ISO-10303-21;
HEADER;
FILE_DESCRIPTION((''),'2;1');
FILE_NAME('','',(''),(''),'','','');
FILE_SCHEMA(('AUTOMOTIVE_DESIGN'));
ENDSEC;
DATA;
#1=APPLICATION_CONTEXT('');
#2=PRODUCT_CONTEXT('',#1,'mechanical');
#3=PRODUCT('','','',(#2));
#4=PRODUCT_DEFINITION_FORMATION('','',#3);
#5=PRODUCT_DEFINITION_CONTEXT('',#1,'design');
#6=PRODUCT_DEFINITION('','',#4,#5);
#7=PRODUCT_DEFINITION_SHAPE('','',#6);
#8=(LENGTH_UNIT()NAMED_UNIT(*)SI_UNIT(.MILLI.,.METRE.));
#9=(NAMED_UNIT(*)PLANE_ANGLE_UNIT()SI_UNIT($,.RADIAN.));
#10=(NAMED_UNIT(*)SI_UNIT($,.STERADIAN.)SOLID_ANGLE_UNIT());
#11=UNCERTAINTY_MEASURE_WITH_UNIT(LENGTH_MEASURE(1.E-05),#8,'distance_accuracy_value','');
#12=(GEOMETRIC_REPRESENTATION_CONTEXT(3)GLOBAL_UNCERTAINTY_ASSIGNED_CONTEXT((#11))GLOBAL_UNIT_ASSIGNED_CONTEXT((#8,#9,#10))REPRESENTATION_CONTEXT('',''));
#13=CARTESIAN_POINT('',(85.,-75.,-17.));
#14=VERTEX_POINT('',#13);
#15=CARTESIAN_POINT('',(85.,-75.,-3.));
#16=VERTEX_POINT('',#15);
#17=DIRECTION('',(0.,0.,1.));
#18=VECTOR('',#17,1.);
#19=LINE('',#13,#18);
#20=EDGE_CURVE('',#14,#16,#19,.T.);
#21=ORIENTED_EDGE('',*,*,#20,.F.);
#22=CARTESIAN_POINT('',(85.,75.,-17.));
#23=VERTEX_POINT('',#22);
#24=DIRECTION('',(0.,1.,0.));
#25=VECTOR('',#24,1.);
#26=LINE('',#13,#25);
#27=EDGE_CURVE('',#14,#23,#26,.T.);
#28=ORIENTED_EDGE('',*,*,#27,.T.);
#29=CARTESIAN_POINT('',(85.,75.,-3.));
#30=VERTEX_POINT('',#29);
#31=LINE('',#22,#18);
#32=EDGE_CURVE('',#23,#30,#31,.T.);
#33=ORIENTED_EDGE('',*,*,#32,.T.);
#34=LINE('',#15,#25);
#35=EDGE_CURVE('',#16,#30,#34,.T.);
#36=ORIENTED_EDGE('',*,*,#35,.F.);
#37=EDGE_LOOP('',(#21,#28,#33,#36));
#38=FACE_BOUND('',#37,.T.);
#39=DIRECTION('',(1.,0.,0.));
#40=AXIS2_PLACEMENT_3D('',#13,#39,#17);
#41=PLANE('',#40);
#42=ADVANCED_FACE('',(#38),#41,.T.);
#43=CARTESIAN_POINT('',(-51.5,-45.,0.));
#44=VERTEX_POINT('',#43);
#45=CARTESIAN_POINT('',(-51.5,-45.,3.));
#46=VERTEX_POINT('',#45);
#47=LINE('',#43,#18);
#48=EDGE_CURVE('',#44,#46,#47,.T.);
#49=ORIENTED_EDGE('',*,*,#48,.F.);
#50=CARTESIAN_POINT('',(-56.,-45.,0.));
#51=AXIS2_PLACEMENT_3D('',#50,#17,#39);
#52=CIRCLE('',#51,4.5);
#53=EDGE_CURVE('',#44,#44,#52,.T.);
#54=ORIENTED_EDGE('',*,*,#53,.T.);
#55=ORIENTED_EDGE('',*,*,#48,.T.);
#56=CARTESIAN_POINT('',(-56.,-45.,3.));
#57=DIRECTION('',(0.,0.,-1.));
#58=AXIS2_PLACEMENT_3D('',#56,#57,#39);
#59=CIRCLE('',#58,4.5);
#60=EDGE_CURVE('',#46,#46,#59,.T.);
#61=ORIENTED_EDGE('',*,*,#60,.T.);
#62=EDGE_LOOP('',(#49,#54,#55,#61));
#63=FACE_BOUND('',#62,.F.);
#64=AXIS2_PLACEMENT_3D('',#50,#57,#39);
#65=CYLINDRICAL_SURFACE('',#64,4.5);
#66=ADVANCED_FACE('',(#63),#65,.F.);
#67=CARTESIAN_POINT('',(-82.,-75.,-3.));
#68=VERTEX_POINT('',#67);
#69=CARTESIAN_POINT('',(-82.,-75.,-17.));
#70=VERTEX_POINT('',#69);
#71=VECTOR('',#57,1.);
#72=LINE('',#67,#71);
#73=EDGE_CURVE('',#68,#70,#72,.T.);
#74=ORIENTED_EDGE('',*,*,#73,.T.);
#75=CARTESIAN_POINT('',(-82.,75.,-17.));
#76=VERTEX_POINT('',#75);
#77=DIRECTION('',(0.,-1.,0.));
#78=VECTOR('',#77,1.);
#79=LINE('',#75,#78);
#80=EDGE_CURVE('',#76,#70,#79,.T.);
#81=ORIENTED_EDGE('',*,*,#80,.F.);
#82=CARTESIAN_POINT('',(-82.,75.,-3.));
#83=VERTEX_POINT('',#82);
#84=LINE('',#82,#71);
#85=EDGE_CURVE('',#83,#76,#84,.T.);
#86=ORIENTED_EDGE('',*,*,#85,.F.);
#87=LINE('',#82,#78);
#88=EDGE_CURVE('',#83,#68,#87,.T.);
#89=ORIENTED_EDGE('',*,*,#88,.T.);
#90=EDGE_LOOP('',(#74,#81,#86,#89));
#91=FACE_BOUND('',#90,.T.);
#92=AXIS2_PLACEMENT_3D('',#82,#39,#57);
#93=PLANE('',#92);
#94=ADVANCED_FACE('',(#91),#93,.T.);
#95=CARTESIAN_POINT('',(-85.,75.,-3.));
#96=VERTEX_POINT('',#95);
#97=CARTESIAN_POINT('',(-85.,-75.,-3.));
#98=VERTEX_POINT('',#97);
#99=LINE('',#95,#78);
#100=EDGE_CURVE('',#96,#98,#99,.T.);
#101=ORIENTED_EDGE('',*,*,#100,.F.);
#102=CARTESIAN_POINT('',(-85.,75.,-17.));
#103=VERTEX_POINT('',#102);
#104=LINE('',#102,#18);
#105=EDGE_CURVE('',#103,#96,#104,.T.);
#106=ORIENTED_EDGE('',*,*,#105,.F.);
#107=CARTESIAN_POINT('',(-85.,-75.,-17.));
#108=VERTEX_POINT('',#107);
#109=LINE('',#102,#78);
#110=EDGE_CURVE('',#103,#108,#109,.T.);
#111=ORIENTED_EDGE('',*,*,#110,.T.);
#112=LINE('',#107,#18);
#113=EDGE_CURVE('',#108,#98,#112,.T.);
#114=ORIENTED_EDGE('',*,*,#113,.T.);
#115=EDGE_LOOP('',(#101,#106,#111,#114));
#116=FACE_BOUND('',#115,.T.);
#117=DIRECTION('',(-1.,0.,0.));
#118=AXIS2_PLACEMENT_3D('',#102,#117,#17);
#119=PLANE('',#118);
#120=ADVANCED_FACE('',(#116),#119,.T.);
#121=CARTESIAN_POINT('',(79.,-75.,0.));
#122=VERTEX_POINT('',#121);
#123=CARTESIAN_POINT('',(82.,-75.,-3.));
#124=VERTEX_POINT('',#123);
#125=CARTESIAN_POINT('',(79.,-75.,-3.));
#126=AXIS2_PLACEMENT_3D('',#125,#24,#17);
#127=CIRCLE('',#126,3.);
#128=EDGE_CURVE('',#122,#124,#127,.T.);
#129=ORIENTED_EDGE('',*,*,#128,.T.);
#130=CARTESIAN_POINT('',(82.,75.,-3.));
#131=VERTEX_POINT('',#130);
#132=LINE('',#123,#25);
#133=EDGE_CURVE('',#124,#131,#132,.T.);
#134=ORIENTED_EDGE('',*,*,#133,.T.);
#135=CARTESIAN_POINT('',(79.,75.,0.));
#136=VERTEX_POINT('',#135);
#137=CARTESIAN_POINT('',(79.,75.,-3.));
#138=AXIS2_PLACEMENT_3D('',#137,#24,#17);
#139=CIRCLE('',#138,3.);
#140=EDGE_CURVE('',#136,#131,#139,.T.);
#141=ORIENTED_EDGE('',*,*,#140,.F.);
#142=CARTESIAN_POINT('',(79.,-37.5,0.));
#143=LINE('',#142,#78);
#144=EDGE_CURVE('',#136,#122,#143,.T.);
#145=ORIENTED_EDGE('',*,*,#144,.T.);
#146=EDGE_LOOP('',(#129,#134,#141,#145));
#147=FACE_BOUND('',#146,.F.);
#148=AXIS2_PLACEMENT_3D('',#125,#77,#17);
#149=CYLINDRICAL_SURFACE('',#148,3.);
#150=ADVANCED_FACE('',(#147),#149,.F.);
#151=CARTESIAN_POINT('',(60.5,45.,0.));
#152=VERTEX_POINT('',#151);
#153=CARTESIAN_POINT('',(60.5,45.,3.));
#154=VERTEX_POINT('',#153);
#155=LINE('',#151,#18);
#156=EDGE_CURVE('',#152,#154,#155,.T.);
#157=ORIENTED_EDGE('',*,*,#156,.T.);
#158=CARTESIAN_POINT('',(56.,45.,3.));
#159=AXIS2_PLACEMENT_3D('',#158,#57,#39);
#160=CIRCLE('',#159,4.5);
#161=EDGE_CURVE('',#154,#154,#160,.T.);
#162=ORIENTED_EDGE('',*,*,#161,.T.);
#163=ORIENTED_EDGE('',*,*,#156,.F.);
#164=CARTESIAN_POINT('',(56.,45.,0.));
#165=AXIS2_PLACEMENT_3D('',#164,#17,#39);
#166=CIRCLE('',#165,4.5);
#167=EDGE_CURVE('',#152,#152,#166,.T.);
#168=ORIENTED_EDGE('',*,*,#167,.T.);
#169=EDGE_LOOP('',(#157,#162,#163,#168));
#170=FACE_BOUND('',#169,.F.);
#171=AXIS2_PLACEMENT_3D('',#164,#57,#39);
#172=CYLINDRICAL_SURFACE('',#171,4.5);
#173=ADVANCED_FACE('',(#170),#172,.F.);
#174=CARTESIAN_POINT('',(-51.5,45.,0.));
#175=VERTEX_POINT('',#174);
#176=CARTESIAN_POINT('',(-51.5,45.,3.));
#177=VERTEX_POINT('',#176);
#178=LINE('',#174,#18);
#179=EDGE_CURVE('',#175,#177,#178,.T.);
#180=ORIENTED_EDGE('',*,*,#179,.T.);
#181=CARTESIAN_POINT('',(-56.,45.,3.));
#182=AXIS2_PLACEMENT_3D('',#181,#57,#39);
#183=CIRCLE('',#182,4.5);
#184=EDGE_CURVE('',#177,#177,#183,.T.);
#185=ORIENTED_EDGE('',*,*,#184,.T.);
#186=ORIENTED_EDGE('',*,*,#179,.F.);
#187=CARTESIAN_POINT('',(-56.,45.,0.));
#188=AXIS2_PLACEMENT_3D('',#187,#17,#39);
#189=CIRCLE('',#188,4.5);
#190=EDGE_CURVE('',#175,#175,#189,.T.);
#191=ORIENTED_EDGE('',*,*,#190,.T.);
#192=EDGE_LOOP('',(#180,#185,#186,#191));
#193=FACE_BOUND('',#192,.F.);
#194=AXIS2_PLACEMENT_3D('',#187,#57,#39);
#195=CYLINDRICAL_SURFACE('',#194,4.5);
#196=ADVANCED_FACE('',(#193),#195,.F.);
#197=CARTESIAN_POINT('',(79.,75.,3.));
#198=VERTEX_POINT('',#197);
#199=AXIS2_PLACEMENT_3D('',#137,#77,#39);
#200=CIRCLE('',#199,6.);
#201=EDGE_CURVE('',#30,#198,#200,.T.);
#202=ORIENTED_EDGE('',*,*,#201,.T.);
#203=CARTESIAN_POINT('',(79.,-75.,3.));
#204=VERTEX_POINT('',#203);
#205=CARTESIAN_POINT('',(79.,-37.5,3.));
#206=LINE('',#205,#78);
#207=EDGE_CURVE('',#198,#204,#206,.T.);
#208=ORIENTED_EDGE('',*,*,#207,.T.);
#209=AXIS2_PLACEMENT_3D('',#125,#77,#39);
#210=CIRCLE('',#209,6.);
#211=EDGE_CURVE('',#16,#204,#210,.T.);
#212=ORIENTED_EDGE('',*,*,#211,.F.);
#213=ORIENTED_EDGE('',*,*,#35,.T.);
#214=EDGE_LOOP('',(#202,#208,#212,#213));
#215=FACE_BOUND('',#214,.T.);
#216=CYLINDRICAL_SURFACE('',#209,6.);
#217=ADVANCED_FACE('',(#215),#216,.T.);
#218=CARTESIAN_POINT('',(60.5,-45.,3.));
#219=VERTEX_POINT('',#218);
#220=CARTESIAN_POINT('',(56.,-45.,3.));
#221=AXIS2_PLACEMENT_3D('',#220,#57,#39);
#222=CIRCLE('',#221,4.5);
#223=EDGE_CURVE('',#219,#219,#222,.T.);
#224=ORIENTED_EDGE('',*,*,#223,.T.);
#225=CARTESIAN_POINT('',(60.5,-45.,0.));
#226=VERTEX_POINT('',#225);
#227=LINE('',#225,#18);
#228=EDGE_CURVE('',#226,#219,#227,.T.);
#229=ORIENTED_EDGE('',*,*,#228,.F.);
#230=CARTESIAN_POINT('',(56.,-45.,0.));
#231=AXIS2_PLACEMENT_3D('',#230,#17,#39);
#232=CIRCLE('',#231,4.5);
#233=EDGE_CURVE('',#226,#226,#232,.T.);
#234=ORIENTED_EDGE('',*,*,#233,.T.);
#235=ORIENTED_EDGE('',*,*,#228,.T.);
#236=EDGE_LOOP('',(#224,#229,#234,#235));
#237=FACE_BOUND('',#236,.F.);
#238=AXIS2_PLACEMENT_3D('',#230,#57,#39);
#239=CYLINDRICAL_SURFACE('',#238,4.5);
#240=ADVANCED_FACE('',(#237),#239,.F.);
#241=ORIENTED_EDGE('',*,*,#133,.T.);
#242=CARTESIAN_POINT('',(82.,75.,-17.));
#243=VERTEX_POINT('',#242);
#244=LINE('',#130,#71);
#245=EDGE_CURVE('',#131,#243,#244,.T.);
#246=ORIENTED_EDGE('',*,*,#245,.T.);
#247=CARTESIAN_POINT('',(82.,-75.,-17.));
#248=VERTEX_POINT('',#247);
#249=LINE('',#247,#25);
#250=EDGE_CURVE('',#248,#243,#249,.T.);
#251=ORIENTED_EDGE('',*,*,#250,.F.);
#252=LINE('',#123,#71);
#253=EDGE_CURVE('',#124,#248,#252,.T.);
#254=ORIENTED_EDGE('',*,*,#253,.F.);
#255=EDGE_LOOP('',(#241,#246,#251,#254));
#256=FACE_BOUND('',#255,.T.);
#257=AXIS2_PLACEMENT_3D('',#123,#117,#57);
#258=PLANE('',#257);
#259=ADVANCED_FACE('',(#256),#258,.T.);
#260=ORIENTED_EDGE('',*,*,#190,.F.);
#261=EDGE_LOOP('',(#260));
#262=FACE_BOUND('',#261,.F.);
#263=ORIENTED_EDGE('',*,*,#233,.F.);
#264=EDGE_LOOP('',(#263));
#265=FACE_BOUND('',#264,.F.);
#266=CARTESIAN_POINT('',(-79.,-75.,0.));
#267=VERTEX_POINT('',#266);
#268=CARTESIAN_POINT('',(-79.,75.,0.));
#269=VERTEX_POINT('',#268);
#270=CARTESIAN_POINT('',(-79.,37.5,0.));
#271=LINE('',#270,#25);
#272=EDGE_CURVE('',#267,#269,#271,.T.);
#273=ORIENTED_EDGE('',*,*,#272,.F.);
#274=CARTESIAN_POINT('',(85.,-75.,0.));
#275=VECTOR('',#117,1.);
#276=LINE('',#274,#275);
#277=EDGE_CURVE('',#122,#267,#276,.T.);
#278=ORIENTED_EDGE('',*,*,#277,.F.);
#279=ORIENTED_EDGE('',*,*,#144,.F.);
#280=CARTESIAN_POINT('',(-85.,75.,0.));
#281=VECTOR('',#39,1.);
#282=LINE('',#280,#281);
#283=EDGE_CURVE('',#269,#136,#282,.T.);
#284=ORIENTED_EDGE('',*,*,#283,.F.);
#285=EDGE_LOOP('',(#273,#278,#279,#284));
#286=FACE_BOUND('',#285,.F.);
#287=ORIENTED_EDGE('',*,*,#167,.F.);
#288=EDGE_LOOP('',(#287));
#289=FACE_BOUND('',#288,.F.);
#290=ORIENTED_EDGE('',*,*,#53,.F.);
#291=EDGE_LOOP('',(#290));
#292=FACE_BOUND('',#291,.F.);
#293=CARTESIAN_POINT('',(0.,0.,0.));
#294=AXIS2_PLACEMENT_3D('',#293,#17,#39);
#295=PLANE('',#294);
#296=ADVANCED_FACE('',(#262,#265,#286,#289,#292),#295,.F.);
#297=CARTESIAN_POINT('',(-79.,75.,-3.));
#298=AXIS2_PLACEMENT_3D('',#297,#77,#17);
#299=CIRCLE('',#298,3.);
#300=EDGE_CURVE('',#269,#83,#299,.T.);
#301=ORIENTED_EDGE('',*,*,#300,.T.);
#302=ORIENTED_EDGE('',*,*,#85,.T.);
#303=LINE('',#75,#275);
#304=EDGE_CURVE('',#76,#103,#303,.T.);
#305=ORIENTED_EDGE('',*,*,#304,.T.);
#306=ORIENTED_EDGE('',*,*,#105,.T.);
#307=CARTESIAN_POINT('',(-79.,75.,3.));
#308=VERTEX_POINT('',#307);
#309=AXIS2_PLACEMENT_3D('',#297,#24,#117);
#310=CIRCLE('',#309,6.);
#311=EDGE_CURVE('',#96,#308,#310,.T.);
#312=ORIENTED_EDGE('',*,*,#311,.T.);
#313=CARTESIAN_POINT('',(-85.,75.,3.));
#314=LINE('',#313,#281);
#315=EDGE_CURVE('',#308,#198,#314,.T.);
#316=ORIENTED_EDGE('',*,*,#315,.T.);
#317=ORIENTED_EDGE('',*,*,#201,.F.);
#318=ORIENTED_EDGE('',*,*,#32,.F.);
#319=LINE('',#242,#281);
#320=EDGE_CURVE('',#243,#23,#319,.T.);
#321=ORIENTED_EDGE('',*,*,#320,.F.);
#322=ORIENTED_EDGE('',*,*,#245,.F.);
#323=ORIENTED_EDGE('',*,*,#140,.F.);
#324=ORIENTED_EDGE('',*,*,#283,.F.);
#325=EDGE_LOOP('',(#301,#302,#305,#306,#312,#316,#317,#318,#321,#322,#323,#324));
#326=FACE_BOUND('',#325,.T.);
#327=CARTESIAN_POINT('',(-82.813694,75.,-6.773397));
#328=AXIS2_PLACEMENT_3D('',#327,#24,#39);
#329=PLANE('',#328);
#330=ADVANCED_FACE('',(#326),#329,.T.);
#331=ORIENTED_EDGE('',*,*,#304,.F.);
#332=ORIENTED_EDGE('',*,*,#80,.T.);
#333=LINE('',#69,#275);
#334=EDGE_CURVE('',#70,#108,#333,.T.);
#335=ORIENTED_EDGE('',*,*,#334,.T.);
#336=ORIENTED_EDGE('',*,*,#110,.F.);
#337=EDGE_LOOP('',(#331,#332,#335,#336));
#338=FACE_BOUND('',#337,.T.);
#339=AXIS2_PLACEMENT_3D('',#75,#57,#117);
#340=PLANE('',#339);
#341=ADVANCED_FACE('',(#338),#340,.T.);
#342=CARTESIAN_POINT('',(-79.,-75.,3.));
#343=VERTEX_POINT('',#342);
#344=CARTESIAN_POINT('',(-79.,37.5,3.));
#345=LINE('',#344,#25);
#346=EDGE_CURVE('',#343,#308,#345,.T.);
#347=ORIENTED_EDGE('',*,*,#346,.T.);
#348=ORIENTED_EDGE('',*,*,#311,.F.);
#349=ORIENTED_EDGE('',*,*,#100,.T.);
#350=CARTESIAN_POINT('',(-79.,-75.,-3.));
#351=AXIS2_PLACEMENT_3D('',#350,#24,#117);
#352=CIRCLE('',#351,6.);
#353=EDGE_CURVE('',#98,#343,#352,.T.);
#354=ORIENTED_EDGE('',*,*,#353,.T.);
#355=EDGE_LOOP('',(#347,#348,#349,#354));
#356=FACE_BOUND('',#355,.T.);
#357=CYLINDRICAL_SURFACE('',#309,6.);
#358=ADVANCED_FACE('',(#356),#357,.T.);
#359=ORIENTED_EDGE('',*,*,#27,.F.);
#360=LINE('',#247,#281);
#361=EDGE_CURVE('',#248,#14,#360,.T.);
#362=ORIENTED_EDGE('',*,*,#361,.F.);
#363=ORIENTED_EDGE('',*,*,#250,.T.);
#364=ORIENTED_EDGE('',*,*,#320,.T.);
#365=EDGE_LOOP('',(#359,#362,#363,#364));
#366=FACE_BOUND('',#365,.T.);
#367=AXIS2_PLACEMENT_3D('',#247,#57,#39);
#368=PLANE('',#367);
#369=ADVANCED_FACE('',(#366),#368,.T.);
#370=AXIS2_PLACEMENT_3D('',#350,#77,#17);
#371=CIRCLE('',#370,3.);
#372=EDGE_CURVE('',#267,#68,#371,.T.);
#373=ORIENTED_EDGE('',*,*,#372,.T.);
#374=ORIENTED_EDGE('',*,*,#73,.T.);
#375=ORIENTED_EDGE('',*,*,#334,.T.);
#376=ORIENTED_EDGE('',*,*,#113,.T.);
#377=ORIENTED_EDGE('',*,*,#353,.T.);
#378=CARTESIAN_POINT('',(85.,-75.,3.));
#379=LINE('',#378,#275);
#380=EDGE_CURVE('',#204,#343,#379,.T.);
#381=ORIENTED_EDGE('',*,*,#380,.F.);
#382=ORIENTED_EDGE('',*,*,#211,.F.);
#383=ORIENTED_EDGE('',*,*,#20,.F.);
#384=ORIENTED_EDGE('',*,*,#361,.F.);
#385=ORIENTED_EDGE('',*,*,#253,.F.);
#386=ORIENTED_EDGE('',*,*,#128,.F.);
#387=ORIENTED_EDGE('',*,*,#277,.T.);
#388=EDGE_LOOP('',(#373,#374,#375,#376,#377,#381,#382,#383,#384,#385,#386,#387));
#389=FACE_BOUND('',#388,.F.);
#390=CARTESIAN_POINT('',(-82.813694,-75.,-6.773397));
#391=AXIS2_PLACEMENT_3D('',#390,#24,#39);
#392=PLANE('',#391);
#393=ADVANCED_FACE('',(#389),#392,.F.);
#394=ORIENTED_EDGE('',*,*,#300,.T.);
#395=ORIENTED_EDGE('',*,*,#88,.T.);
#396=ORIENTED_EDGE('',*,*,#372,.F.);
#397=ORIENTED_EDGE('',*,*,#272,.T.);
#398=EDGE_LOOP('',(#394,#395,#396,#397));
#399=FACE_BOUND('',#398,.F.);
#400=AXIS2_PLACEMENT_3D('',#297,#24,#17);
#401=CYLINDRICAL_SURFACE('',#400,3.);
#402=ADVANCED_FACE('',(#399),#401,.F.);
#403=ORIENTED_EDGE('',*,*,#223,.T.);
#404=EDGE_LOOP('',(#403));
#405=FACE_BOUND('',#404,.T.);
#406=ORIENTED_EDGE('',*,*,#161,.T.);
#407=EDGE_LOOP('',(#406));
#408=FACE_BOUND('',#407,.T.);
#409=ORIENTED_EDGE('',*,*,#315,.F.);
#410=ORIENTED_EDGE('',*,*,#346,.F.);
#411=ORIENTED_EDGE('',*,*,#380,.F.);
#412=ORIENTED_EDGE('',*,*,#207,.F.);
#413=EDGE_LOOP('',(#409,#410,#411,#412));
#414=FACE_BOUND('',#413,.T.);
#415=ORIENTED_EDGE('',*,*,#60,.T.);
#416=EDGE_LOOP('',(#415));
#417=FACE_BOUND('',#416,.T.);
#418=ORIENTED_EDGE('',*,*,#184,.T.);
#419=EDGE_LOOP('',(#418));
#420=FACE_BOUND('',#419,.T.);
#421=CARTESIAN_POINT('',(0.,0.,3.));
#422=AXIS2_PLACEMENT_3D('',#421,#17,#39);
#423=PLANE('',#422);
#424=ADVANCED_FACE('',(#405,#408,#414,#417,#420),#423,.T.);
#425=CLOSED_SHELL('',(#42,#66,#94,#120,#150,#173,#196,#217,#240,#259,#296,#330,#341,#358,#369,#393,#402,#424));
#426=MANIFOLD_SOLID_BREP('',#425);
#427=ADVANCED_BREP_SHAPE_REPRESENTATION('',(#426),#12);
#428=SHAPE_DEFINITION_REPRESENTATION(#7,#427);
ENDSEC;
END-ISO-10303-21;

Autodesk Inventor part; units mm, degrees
ref_plane "YZ Plane" through (0, 0, 0) normal (1, 0, 0) x (0, 1, 0)
ref_plane "XZ Plane" through (0, 0, 0) normal (0, 1, 0) x (-1, 0, 0)
ref_plane "XY Plane" through (0, 0, 0) normal (0, 0, 1) x (1, 0, 0)
sketch "Sketch1" plane through (0, 0, 0) normal (0, 0, 1) x (1, 0, 0)
  line L0 (85, -75) -> (-85, -75)
  line L1 (-85, -75) -> (-85, 75)
  line L2 (-85, 75) -> (85, 75)
  line L3 (85, 75) -> (85, -75)
  line L4 (85, 75) -> (-85, -75) construction
  point P0 (0, 0)
  point P1 (0, 0)
  dimension "d1" = 150
  dimension "d2" = 170
extrude "Plate1" add sketch "Sketch1" along normal blind 3
sketch "Sketch2" plane through (0, 0, 0) normal (0, 0, 1) x (1, 0, 0)
  line L0 (56, -45) -> (-56, -45) construction
  line L1 (-56, -45) -> (-56, 45) construction
  line L2 (-56, 45) -> (56, 45) construction
  line L3 (56, 45) -> (56, -45) construction
  line L4 (56, -45) -> (-56, 45) construction
  line L5 (-56, -45) -> (56, 45) construction
  circle A0 centre (-56, -45) radius 4.5
  circle A1 centre (56, -45) radius 4.5
  circle A2 centre (56, 45) radius 4.5
  circle A3 centre (-56, 45) radius 4.5
  line L6 (56, 0) -> (-56, 0) construction
  point P0 (0, 0)
  point P1 (0, 0)
  dimension "d4" = 112
  dimension "d5" = 90
  dimension "d7" = 9
extrude "Extrusion1" cut sketch "Sketch2" along normal through all
sketch "Sketch3" plane through (-82, 75, 3) normal (-1, 0, 0) x (0, -1, 0)
  line L0 (150, 0) -> (0, 0)
  line L1 (0, 0) -> (0, -20)
  line L2 (0, -20) -> (150, -20)
  line L3 (150, -20) -> (150, 0)
edge flange "Flange1" height 20 angle 90 thickness 3 bend radius 3 thickness toward (-1, 0, 0) relief tear relief width 3 relief depth 1.5 corner gap 3 corner form 0 edges at (-85, 0, 0) (85, 0, 0) wall of the first edge with corners at (-82, -75, 3) (-82, 75, 3) (-82, 75, -17) (-82, -75, -17)
bend "Bend1"
corner "Corner1"
sketch "Sketch4" plane through (0, 0, 0) normal (0, 0, 1) x (1, 0, 0)
  circle A0 centre (0, 75) radius 17.5 projected
  line L0 (0, 125) -> (0, 105) construction
  line L1 (-3, 125) -> (-3, 105)
  line L2 (3, 105) -> (3, 125)
  arc A1 (3, 125) -> (-3, 125) centre (0, 125) ccw
  arc A2 (-3, 105) -> (3, 105) centre (0, 105) ccw
  arc A3 (34.641, 95) -> (20, 109.641) centre (0, 75) ccw construction
  arc A4 (37.2391, 96.5) -> (21.5, 112.2391) centre (0, 75) ccw
  arc A5 (32.0429, 93.5) -> (18.5, 107.0429) centre (0, 75) ccw
  arc A6 (32.0429, 93.5) -> (37.2391, 96.5) centre (34.641, 95) ccw
  arc A7 (21.5, 112.2391) -> (18.5, 107.0429) centre (20, 109.641) ccw
  line L3 (0, 75) -> (20, 109.641) construction
  line L4 (0, 75) -> (40, 75) construction
  line L5 (0, 75) -> (34.641, 95) construction
  point P0 (0, 0)
  point P1 (0, 115)
  dimension "d20" = 20
  dimension "d21" = 6
  dimension "d22" = 30
  dimension "d23" = 60
  dimension "d24" = 30
  dimension "d25" = 6
  dimension "d26" = 40
extrude "Extrusion2" [suppressed]
pattern_circular "Circular Pattern1" [suppressed]
equation "\"d0\" = Thickness"
equation "\"d10\" = BendReliefWidth"
equation "\"d11\" = BendReliefDepth"
equation "\"d12\" = MinimumRemnant"
equation "\"d13\" = TransitionRadius"
equation "\"d16\" = BendRadius"
equation "\"d17\" = CornerReliefSize"
equation "\"d18\" = GapSize"
equation "\"d19\" = JacobiRadiusSize"
equation "\"BendRadius\" = Thickness"
equation "\"BendReliefWidth\" = Thickness"
equation "\"BendReliefDepth\" = 0.5 * Thickness"
equation "\"CornerReliefSize\" = 4 * Thickness"
equation "\"MinimumRemnant\" = 2 * Thickness"
equation "\"TransitionRadius\" = BendRadius"
equation "\"JacobiRadiusSize\" = BendRadius"
equation "\"GapSize\" = Thickness"
equation "\"Thickness\" = 3"
properties part number "GNH 026  Motor pillar 2" material "Stainless Steel"
